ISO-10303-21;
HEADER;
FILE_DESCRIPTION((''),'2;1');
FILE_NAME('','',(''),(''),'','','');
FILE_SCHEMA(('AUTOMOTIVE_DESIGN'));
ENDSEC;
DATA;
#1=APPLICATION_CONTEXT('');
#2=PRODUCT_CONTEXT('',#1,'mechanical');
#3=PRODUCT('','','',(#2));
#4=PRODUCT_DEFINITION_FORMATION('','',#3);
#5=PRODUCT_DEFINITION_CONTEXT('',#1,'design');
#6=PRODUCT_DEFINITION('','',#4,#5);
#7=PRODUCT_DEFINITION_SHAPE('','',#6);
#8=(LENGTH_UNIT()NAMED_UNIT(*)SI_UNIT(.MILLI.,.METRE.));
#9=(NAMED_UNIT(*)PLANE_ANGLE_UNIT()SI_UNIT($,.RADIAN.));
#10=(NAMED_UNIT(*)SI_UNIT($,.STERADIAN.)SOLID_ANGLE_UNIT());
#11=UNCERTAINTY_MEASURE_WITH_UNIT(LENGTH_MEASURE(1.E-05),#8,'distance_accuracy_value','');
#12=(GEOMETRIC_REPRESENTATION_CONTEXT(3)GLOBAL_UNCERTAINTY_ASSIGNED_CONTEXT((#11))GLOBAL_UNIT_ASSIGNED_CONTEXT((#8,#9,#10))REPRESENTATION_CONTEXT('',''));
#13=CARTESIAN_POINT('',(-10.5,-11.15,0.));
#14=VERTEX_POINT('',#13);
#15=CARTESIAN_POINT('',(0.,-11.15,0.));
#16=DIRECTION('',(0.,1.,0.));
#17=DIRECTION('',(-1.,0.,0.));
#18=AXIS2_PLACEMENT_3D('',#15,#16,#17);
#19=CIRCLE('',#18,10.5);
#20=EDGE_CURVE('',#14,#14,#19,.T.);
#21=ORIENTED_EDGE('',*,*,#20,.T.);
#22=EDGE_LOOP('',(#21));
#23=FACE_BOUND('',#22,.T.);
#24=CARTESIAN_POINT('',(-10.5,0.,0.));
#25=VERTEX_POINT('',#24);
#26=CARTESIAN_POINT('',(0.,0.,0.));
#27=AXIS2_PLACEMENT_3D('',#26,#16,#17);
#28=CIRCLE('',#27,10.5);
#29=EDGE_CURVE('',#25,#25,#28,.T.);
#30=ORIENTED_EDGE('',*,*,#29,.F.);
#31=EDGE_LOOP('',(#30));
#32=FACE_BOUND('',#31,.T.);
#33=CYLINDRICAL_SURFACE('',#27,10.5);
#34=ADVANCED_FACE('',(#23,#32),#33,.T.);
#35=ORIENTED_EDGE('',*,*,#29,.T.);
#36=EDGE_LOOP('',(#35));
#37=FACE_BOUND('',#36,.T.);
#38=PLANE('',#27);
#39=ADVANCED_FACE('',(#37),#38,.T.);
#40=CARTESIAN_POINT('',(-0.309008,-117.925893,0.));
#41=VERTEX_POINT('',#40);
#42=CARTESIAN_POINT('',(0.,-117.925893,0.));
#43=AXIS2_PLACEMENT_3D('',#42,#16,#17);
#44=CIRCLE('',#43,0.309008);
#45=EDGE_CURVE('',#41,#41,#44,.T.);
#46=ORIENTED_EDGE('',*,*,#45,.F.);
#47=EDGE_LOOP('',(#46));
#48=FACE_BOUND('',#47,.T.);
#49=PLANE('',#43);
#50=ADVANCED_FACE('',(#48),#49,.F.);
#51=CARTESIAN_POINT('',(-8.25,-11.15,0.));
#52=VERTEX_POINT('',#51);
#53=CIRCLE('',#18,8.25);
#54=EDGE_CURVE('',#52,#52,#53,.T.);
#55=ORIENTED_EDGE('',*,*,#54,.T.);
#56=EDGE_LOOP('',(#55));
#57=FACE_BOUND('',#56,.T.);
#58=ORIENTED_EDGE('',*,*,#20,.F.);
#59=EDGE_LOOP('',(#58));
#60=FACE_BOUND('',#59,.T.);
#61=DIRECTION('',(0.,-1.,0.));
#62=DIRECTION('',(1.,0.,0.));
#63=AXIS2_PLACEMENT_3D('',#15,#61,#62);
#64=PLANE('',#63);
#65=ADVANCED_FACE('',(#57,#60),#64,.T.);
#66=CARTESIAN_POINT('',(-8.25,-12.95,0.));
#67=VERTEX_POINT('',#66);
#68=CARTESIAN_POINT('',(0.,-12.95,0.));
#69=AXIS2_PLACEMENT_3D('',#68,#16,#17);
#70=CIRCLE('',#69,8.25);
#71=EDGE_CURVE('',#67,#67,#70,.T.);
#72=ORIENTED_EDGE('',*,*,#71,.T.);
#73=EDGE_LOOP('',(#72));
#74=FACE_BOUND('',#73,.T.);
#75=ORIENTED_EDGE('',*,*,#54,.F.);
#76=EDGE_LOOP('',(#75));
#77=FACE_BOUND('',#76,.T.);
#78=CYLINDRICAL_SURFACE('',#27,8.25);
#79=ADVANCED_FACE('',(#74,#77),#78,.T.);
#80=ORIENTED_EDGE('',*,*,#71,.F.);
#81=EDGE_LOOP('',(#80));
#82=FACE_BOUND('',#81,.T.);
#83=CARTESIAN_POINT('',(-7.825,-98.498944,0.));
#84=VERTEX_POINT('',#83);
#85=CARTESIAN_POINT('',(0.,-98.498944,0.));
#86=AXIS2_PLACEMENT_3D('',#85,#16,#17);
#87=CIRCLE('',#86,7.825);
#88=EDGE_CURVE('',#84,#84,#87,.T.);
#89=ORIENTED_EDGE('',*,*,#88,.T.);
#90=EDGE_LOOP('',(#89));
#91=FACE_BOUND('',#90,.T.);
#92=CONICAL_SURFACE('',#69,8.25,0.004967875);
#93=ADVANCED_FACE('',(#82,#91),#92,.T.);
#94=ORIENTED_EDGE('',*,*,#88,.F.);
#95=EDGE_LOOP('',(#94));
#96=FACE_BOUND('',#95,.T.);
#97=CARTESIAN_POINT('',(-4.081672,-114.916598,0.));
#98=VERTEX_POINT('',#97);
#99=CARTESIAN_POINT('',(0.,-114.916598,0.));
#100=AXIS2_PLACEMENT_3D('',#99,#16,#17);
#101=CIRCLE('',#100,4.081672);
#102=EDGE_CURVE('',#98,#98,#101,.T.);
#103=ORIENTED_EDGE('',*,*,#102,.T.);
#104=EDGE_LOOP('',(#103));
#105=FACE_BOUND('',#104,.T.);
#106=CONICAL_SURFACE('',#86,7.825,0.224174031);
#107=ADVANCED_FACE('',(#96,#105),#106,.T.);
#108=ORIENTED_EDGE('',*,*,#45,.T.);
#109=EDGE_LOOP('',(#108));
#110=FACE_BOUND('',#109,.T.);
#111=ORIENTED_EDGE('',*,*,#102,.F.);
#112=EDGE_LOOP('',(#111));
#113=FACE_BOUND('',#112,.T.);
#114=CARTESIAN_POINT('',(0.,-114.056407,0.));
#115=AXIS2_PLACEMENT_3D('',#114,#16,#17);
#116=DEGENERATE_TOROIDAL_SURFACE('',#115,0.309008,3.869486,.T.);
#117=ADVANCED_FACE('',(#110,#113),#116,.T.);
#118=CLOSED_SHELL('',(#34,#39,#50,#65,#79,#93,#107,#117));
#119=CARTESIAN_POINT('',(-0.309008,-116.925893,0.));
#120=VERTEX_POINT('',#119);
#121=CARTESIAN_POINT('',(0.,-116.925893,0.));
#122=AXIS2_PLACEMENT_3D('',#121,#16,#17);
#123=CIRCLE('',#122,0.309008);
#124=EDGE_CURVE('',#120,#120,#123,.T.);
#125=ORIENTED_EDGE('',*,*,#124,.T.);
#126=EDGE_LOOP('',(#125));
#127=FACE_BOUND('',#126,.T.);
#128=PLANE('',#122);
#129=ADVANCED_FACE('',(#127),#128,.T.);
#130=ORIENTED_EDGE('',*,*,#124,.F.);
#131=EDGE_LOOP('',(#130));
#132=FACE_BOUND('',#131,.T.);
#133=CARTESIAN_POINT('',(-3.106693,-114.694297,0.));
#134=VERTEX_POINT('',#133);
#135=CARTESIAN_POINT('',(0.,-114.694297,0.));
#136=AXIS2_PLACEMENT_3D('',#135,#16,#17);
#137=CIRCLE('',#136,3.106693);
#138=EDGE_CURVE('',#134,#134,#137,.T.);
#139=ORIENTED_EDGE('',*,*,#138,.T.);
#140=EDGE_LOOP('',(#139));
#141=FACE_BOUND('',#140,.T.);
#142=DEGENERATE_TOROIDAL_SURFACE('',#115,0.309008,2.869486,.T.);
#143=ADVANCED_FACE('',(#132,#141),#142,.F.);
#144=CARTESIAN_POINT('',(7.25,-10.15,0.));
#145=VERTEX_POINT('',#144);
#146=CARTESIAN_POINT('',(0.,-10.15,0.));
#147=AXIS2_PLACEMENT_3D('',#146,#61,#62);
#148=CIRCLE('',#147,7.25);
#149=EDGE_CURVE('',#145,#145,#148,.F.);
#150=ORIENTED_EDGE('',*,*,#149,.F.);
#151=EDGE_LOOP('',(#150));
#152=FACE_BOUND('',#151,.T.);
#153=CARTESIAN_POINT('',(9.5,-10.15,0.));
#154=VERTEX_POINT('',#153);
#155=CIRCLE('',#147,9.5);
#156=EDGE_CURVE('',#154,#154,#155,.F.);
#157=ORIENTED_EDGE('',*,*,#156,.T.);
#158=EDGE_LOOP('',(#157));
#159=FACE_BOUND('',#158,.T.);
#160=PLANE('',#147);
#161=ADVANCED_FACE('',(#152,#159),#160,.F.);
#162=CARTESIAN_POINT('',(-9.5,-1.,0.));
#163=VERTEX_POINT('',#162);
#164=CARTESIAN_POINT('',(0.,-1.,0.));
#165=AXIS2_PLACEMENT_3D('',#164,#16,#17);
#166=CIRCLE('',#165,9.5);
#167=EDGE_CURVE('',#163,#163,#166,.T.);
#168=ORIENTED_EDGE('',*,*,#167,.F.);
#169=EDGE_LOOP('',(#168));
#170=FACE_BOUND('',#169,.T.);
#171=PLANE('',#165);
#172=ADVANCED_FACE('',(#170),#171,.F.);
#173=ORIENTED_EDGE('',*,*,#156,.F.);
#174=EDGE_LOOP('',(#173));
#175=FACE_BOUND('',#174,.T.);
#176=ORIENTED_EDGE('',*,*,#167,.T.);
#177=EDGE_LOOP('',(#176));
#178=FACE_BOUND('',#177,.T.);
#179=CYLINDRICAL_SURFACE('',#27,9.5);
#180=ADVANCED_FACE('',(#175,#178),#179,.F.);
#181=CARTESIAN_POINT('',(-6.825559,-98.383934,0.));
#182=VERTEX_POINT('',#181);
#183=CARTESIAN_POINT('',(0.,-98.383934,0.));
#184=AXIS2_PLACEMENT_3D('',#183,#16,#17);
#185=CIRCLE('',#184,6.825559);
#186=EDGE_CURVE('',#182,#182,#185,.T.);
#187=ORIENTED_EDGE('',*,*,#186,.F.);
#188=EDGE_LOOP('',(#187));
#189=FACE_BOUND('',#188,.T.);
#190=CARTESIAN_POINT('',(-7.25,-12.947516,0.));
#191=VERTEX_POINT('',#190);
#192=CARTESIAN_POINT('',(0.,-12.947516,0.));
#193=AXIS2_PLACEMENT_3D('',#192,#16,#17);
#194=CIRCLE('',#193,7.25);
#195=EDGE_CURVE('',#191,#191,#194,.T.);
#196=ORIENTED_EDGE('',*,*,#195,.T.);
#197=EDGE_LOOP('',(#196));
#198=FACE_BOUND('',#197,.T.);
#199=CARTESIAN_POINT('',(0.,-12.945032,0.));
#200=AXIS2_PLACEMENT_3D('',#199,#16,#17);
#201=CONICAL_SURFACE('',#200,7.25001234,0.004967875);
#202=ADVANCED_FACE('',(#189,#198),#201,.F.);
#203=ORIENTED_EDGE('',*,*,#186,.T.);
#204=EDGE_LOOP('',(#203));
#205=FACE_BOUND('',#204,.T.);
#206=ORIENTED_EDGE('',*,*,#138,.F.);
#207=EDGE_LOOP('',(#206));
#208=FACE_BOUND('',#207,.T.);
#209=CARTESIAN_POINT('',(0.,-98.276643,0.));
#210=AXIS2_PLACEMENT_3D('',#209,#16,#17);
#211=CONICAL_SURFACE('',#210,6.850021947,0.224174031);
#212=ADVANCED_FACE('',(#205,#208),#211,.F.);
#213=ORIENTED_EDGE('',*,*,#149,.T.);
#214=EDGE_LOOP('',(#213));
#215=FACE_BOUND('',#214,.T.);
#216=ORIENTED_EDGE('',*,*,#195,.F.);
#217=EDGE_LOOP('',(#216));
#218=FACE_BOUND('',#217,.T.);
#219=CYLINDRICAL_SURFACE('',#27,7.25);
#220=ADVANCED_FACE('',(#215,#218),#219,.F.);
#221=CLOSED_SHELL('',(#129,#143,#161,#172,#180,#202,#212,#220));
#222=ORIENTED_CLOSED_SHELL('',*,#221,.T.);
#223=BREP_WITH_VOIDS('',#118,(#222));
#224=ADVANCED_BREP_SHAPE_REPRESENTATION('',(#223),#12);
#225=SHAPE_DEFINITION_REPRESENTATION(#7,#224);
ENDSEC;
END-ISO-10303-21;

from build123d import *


# Read off the part's stored shape, not the designer's step: Shell1
with BuildPart() as part:
    # Sketch1 → Revolve1 (revolve)
    with BuildSketch(Plane.XY, mode=Mode.PRIVATE) as revolve1_sk:
        with BuildLine():
            Line((10.5, 0), (0, 0))
            Line((0, 0), (0, -117.925892815))
            Line((0, -117.925892815), (0.309007936, -117.925892815))
            ThreePointArc((0.309007936, -117.925892815), (2.721933774, -117.081420898), (4.081671516, -114.916598228))
            Line((4.081671516, -114.916598228), (7.825, -98.498944324))
            Line((7.825, -98.498944324), (8.25, -12.95))
            Line((8.25, -12.95), (8.25, -11.15))
            Line((8.25, -11.15), (10.5, -11.15))
            Line((10.5, -11.15), (10.5, 0))
        make_face()
    revolve(revolve1_sk.sketch.rotate(Axis((0, 0, 0), (0, -1, 0)), 180), axis=Axis((0, 0, 0), (0, -1, 0)))

    # Shell1 outline → Shell1 (revolve, cut)
    with BuildSketch(Plane.XY):
        with BuildLine():
            Line((0, -1), (0, -116.925892815))
            Line((0, -116.925892815), (0.309007936, -116.925892815))
            ThreePointArc((0.309007936, -116.925892815), (2.098355846, -116.299659701), (3.106693462, -114.694297092))
            Line((3.106693462, -114.694297092), (6.825559023, -98.383933749))
            Line((6.825559023, -98.383933749), (7.25, -12.947516057))
            Line((7.25, -12.947516057), (7.25, -10.15))
            Line((7.25, -10.15), (9.5, -10.15))
            Line((9.5, -10.15), (9.5, -1))
            Line((9.5, -1), (0, -1))
        make_face()
    revolve(axis=Axis((0, 0, 0), (0, 1, 0)), mode=Mode.SUBTRACT)


solid = part.part
